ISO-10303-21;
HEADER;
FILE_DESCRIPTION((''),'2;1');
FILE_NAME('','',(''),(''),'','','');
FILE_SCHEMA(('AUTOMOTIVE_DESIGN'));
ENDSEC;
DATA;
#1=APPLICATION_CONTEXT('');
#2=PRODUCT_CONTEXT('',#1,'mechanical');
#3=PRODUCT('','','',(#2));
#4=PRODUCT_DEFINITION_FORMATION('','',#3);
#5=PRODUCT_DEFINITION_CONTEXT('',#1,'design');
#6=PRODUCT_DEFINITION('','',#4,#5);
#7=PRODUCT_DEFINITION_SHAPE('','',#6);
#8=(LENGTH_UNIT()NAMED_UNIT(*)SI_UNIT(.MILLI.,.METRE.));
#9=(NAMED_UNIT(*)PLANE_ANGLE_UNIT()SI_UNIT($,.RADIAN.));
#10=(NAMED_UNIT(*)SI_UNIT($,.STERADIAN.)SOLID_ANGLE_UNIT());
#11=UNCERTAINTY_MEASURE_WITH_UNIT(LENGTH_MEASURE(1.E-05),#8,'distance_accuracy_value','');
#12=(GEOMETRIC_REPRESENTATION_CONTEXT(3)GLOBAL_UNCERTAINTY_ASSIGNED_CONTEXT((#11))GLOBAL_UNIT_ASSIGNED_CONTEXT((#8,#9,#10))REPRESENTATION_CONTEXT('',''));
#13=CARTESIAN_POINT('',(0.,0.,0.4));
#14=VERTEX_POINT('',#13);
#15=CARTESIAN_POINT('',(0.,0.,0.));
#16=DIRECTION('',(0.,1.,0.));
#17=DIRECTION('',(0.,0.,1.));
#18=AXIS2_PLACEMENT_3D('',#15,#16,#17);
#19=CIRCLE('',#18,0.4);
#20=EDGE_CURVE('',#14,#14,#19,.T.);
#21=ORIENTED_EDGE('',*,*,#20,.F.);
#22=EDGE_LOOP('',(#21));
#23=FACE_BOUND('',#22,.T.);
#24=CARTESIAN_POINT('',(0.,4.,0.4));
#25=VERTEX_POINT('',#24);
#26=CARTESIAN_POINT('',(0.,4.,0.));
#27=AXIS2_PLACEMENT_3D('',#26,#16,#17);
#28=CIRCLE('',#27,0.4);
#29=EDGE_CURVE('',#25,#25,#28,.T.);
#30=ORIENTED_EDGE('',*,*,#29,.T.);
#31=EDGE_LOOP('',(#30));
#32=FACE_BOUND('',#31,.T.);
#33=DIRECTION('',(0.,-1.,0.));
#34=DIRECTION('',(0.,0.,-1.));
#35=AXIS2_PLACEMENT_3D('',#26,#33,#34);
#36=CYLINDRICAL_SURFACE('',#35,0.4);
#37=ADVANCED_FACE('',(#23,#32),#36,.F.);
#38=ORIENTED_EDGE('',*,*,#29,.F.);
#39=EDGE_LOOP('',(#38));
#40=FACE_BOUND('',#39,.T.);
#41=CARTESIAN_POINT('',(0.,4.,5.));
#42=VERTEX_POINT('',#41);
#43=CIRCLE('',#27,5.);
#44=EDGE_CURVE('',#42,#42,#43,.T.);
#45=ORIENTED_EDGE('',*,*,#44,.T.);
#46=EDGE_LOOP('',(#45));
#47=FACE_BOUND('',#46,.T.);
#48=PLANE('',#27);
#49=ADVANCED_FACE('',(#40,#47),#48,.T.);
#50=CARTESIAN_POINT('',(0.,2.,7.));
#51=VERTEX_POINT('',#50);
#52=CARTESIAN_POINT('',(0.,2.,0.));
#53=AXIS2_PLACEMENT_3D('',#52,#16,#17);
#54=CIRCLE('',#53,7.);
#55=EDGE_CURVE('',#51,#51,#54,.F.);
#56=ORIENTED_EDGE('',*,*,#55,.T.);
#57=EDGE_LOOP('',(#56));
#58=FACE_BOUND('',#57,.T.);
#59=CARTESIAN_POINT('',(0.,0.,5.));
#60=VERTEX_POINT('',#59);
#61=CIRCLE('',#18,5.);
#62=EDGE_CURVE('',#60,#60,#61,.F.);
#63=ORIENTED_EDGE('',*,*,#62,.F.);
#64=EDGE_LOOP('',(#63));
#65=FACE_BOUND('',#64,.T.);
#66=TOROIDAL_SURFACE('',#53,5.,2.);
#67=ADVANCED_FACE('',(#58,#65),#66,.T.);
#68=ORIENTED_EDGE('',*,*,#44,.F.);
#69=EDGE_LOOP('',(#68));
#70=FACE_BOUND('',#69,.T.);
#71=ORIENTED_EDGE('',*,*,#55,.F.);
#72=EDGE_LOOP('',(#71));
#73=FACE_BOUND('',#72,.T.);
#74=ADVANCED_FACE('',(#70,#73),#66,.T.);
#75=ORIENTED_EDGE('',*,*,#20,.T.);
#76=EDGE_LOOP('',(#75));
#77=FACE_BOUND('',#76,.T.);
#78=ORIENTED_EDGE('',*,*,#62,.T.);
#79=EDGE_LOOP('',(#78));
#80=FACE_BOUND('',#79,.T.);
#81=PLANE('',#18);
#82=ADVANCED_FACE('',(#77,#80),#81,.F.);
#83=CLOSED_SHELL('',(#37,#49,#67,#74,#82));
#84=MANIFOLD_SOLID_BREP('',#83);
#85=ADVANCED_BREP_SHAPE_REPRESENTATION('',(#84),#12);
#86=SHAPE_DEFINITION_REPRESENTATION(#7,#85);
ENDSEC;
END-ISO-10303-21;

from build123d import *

# Parameters (mm, degrees)
SKETCH1_R           = 7
SKETCH1_R_2         = 0.4
BOSS_EXTRUDE1_DEPTH = 4
FILLET1_R           = 2


with BuildPart() as part:
    # Sketch1 → Boss-Extrude1 (new body)
    with BuildSketch(Plane(origin=(0, 0, 0), x_dir=(1, 0, 0), z_dir=(0, 1, 0))):
        with Locations(Location((0, 0, 0), (0, 0, 270))):
            Circle(SKETCH1_R)
        with Locations(Location((0, 0, 0), (0, 0, 270))):
            Circle(SKETCH1_R_2, mode=Mode.SUBTRACT)
    extrude(amount=BOSS_EXTRUDE1_DEPTH)

    # Fillet1
    fillet1_edges = [part.edges().sort_by_distance(p)[0] for p in [
        (0, 0, -7),
        (0, 4, -7),
    ]]
    fillet(fillet1_edges, radius=FILLET1_R - 0.0001)  # a hair under: the kernel refuses the full size


solid = part.part
